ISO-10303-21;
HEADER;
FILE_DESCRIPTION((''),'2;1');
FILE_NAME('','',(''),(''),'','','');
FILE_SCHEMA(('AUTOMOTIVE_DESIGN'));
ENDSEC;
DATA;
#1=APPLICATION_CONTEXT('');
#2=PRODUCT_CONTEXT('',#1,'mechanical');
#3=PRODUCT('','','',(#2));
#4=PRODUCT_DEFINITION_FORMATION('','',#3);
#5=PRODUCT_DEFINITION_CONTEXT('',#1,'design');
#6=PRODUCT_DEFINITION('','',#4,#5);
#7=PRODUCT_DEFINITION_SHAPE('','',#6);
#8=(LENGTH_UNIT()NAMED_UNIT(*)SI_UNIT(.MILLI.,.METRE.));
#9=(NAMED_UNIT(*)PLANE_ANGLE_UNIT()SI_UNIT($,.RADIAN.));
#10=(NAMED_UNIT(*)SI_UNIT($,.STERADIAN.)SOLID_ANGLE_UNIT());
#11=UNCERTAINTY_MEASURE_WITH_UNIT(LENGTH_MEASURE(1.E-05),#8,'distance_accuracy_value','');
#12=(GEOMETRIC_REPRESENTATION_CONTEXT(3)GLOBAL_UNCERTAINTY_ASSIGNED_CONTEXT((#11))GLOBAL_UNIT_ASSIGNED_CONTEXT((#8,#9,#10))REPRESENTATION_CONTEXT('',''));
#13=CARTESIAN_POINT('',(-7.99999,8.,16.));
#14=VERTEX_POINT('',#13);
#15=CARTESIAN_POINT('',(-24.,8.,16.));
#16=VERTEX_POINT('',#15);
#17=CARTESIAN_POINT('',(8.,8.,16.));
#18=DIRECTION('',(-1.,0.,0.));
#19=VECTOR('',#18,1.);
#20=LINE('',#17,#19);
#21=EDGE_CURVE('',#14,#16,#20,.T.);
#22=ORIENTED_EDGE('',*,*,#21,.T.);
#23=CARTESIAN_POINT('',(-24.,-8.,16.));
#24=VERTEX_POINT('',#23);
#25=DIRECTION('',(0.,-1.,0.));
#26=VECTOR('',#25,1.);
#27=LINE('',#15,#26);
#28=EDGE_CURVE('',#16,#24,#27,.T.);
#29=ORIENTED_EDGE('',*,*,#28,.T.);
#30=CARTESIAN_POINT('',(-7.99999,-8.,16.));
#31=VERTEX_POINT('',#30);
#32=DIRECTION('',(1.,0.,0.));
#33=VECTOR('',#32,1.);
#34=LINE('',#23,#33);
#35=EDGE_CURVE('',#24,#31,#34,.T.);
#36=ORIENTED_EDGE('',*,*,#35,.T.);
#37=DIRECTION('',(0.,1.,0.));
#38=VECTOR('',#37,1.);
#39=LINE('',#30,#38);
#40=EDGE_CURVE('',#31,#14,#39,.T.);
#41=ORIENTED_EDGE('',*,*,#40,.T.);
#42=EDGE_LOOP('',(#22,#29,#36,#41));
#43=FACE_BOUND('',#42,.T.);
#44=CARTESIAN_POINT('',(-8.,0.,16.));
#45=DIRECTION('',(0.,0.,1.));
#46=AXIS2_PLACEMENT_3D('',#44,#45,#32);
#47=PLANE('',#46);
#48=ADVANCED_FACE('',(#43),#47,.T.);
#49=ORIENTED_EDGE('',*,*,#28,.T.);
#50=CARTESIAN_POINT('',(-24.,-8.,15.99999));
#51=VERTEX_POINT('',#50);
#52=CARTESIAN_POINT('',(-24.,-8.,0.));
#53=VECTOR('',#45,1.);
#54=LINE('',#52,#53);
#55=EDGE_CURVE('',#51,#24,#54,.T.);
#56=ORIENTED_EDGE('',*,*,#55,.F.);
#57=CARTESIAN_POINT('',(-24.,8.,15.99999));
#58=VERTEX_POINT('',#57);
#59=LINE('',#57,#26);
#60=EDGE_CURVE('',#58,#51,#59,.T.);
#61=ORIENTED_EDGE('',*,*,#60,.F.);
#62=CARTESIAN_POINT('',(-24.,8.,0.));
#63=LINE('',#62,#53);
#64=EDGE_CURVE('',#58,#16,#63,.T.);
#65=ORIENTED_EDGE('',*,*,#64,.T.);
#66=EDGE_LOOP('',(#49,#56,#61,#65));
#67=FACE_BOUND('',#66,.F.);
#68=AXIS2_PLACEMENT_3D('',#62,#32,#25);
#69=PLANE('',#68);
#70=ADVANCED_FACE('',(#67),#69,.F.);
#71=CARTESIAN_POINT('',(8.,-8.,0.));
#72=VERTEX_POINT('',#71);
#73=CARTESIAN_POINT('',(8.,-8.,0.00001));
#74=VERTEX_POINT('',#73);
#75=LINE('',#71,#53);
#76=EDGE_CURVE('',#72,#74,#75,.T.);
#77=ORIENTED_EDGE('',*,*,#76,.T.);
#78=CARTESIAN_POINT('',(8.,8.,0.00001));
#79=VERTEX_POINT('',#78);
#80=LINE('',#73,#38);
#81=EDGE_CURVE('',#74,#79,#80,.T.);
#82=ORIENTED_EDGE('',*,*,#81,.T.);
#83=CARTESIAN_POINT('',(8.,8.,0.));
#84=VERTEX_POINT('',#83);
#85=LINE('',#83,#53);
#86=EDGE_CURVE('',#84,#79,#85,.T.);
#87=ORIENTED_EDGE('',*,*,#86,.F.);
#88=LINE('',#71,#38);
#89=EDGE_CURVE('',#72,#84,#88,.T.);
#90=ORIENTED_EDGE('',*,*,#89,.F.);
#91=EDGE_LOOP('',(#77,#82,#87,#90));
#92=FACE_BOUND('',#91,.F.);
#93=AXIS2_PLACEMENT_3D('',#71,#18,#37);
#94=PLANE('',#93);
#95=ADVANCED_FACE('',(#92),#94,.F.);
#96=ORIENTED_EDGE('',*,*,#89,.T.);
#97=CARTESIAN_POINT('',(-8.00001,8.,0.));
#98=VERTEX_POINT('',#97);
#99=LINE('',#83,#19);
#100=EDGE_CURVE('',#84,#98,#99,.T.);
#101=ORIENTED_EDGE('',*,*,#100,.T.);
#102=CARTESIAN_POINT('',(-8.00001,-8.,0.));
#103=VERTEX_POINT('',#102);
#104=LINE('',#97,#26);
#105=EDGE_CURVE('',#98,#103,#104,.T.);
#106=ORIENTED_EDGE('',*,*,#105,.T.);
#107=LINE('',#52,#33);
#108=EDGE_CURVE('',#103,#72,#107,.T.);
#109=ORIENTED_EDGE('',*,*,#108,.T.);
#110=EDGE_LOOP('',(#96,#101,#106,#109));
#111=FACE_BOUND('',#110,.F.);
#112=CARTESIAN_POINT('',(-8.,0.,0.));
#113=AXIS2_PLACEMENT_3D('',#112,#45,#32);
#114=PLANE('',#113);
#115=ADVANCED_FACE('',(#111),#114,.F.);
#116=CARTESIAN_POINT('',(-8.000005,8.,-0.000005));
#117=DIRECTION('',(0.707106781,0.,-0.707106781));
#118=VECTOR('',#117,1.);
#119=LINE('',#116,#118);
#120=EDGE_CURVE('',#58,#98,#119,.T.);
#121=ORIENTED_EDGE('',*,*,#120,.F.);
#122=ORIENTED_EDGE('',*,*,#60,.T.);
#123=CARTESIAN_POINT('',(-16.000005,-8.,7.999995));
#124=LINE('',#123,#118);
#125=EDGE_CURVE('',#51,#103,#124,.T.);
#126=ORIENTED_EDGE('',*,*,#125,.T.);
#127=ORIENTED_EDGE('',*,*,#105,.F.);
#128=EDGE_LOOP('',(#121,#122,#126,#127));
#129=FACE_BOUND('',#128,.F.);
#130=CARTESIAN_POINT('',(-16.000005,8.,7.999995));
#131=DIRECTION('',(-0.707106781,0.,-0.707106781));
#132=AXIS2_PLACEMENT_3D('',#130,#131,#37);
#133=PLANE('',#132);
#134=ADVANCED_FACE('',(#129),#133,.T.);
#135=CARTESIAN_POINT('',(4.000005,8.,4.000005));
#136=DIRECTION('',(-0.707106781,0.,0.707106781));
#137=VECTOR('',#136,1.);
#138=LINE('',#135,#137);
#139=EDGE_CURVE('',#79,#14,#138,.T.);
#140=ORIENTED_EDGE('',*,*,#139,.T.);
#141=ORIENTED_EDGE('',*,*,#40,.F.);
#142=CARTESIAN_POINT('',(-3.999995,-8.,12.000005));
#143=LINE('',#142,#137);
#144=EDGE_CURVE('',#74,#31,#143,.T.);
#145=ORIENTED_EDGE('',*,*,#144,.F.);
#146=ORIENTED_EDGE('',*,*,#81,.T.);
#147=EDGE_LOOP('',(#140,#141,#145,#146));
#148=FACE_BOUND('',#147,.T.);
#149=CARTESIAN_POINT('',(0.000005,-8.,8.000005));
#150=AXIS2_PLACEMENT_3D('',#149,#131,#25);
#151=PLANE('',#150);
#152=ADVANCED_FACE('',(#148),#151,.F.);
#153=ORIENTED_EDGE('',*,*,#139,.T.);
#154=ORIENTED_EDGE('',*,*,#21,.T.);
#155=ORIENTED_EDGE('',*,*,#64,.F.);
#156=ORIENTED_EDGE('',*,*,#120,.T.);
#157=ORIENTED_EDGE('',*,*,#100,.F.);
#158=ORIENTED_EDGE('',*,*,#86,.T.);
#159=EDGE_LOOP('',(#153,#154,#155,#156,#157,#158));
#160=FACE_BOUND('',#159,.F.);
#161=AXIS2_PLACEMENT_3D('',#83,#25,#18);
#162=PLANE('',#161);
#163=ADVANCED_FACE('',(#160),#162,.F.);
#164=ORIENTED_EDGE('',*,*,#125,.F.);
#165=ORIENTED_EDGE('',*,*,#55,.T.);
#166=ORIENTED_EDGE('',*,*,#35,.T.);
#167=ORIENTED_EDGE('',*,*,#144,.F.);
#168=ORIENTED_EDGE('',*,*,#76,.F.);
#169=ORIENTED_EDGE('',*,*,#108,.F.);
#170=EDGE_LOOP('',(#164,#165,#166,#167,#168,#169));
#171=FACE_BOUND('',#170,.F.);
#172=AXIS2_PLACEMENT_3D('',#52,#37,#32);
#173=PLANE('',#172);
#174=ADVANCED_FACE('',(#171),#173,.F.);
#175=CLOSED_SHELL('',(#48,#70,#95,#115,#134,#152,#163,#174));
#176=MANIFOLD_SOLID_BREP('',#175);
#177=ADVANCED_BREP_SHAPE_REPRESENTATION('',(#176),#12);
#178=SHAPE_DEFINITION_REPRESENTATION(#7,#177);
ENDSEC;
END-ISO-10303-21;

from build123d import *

# Parameters (mm, degrees)
F1_DEPTH = 16
F2_SIZE  = 15.99999


# Not quite as in the source:
# - a fillet or chamfer is up to 0.001 mm smaller than in the source, because OpenCascade refuses the exact size


with BuildPart() as f1:
    # F0 (on Top) → F1 (new body)
    with BuildSketch(Plane.XY):
        Polygon((8, -8), (8, 8), (0, 8), (-8, 8), (-16, 8), (-24, 8), (-24, -8), (-16, -8), (-8, -8), (0, -8), align=None)
    extrude(amount=F1_DEPTH)

    # F2 (size 16 in the source; OpenCascade refuses exactly that, so slightly less here)
    f2_edges = [f1.edges().sort_by_distance(p)[0] for p in [
        (8, 0, 16),
        (-24, 0, 0),
    ]]
    chamfer(f2_edges, length=F2_SIZE)


solid = f1.part
